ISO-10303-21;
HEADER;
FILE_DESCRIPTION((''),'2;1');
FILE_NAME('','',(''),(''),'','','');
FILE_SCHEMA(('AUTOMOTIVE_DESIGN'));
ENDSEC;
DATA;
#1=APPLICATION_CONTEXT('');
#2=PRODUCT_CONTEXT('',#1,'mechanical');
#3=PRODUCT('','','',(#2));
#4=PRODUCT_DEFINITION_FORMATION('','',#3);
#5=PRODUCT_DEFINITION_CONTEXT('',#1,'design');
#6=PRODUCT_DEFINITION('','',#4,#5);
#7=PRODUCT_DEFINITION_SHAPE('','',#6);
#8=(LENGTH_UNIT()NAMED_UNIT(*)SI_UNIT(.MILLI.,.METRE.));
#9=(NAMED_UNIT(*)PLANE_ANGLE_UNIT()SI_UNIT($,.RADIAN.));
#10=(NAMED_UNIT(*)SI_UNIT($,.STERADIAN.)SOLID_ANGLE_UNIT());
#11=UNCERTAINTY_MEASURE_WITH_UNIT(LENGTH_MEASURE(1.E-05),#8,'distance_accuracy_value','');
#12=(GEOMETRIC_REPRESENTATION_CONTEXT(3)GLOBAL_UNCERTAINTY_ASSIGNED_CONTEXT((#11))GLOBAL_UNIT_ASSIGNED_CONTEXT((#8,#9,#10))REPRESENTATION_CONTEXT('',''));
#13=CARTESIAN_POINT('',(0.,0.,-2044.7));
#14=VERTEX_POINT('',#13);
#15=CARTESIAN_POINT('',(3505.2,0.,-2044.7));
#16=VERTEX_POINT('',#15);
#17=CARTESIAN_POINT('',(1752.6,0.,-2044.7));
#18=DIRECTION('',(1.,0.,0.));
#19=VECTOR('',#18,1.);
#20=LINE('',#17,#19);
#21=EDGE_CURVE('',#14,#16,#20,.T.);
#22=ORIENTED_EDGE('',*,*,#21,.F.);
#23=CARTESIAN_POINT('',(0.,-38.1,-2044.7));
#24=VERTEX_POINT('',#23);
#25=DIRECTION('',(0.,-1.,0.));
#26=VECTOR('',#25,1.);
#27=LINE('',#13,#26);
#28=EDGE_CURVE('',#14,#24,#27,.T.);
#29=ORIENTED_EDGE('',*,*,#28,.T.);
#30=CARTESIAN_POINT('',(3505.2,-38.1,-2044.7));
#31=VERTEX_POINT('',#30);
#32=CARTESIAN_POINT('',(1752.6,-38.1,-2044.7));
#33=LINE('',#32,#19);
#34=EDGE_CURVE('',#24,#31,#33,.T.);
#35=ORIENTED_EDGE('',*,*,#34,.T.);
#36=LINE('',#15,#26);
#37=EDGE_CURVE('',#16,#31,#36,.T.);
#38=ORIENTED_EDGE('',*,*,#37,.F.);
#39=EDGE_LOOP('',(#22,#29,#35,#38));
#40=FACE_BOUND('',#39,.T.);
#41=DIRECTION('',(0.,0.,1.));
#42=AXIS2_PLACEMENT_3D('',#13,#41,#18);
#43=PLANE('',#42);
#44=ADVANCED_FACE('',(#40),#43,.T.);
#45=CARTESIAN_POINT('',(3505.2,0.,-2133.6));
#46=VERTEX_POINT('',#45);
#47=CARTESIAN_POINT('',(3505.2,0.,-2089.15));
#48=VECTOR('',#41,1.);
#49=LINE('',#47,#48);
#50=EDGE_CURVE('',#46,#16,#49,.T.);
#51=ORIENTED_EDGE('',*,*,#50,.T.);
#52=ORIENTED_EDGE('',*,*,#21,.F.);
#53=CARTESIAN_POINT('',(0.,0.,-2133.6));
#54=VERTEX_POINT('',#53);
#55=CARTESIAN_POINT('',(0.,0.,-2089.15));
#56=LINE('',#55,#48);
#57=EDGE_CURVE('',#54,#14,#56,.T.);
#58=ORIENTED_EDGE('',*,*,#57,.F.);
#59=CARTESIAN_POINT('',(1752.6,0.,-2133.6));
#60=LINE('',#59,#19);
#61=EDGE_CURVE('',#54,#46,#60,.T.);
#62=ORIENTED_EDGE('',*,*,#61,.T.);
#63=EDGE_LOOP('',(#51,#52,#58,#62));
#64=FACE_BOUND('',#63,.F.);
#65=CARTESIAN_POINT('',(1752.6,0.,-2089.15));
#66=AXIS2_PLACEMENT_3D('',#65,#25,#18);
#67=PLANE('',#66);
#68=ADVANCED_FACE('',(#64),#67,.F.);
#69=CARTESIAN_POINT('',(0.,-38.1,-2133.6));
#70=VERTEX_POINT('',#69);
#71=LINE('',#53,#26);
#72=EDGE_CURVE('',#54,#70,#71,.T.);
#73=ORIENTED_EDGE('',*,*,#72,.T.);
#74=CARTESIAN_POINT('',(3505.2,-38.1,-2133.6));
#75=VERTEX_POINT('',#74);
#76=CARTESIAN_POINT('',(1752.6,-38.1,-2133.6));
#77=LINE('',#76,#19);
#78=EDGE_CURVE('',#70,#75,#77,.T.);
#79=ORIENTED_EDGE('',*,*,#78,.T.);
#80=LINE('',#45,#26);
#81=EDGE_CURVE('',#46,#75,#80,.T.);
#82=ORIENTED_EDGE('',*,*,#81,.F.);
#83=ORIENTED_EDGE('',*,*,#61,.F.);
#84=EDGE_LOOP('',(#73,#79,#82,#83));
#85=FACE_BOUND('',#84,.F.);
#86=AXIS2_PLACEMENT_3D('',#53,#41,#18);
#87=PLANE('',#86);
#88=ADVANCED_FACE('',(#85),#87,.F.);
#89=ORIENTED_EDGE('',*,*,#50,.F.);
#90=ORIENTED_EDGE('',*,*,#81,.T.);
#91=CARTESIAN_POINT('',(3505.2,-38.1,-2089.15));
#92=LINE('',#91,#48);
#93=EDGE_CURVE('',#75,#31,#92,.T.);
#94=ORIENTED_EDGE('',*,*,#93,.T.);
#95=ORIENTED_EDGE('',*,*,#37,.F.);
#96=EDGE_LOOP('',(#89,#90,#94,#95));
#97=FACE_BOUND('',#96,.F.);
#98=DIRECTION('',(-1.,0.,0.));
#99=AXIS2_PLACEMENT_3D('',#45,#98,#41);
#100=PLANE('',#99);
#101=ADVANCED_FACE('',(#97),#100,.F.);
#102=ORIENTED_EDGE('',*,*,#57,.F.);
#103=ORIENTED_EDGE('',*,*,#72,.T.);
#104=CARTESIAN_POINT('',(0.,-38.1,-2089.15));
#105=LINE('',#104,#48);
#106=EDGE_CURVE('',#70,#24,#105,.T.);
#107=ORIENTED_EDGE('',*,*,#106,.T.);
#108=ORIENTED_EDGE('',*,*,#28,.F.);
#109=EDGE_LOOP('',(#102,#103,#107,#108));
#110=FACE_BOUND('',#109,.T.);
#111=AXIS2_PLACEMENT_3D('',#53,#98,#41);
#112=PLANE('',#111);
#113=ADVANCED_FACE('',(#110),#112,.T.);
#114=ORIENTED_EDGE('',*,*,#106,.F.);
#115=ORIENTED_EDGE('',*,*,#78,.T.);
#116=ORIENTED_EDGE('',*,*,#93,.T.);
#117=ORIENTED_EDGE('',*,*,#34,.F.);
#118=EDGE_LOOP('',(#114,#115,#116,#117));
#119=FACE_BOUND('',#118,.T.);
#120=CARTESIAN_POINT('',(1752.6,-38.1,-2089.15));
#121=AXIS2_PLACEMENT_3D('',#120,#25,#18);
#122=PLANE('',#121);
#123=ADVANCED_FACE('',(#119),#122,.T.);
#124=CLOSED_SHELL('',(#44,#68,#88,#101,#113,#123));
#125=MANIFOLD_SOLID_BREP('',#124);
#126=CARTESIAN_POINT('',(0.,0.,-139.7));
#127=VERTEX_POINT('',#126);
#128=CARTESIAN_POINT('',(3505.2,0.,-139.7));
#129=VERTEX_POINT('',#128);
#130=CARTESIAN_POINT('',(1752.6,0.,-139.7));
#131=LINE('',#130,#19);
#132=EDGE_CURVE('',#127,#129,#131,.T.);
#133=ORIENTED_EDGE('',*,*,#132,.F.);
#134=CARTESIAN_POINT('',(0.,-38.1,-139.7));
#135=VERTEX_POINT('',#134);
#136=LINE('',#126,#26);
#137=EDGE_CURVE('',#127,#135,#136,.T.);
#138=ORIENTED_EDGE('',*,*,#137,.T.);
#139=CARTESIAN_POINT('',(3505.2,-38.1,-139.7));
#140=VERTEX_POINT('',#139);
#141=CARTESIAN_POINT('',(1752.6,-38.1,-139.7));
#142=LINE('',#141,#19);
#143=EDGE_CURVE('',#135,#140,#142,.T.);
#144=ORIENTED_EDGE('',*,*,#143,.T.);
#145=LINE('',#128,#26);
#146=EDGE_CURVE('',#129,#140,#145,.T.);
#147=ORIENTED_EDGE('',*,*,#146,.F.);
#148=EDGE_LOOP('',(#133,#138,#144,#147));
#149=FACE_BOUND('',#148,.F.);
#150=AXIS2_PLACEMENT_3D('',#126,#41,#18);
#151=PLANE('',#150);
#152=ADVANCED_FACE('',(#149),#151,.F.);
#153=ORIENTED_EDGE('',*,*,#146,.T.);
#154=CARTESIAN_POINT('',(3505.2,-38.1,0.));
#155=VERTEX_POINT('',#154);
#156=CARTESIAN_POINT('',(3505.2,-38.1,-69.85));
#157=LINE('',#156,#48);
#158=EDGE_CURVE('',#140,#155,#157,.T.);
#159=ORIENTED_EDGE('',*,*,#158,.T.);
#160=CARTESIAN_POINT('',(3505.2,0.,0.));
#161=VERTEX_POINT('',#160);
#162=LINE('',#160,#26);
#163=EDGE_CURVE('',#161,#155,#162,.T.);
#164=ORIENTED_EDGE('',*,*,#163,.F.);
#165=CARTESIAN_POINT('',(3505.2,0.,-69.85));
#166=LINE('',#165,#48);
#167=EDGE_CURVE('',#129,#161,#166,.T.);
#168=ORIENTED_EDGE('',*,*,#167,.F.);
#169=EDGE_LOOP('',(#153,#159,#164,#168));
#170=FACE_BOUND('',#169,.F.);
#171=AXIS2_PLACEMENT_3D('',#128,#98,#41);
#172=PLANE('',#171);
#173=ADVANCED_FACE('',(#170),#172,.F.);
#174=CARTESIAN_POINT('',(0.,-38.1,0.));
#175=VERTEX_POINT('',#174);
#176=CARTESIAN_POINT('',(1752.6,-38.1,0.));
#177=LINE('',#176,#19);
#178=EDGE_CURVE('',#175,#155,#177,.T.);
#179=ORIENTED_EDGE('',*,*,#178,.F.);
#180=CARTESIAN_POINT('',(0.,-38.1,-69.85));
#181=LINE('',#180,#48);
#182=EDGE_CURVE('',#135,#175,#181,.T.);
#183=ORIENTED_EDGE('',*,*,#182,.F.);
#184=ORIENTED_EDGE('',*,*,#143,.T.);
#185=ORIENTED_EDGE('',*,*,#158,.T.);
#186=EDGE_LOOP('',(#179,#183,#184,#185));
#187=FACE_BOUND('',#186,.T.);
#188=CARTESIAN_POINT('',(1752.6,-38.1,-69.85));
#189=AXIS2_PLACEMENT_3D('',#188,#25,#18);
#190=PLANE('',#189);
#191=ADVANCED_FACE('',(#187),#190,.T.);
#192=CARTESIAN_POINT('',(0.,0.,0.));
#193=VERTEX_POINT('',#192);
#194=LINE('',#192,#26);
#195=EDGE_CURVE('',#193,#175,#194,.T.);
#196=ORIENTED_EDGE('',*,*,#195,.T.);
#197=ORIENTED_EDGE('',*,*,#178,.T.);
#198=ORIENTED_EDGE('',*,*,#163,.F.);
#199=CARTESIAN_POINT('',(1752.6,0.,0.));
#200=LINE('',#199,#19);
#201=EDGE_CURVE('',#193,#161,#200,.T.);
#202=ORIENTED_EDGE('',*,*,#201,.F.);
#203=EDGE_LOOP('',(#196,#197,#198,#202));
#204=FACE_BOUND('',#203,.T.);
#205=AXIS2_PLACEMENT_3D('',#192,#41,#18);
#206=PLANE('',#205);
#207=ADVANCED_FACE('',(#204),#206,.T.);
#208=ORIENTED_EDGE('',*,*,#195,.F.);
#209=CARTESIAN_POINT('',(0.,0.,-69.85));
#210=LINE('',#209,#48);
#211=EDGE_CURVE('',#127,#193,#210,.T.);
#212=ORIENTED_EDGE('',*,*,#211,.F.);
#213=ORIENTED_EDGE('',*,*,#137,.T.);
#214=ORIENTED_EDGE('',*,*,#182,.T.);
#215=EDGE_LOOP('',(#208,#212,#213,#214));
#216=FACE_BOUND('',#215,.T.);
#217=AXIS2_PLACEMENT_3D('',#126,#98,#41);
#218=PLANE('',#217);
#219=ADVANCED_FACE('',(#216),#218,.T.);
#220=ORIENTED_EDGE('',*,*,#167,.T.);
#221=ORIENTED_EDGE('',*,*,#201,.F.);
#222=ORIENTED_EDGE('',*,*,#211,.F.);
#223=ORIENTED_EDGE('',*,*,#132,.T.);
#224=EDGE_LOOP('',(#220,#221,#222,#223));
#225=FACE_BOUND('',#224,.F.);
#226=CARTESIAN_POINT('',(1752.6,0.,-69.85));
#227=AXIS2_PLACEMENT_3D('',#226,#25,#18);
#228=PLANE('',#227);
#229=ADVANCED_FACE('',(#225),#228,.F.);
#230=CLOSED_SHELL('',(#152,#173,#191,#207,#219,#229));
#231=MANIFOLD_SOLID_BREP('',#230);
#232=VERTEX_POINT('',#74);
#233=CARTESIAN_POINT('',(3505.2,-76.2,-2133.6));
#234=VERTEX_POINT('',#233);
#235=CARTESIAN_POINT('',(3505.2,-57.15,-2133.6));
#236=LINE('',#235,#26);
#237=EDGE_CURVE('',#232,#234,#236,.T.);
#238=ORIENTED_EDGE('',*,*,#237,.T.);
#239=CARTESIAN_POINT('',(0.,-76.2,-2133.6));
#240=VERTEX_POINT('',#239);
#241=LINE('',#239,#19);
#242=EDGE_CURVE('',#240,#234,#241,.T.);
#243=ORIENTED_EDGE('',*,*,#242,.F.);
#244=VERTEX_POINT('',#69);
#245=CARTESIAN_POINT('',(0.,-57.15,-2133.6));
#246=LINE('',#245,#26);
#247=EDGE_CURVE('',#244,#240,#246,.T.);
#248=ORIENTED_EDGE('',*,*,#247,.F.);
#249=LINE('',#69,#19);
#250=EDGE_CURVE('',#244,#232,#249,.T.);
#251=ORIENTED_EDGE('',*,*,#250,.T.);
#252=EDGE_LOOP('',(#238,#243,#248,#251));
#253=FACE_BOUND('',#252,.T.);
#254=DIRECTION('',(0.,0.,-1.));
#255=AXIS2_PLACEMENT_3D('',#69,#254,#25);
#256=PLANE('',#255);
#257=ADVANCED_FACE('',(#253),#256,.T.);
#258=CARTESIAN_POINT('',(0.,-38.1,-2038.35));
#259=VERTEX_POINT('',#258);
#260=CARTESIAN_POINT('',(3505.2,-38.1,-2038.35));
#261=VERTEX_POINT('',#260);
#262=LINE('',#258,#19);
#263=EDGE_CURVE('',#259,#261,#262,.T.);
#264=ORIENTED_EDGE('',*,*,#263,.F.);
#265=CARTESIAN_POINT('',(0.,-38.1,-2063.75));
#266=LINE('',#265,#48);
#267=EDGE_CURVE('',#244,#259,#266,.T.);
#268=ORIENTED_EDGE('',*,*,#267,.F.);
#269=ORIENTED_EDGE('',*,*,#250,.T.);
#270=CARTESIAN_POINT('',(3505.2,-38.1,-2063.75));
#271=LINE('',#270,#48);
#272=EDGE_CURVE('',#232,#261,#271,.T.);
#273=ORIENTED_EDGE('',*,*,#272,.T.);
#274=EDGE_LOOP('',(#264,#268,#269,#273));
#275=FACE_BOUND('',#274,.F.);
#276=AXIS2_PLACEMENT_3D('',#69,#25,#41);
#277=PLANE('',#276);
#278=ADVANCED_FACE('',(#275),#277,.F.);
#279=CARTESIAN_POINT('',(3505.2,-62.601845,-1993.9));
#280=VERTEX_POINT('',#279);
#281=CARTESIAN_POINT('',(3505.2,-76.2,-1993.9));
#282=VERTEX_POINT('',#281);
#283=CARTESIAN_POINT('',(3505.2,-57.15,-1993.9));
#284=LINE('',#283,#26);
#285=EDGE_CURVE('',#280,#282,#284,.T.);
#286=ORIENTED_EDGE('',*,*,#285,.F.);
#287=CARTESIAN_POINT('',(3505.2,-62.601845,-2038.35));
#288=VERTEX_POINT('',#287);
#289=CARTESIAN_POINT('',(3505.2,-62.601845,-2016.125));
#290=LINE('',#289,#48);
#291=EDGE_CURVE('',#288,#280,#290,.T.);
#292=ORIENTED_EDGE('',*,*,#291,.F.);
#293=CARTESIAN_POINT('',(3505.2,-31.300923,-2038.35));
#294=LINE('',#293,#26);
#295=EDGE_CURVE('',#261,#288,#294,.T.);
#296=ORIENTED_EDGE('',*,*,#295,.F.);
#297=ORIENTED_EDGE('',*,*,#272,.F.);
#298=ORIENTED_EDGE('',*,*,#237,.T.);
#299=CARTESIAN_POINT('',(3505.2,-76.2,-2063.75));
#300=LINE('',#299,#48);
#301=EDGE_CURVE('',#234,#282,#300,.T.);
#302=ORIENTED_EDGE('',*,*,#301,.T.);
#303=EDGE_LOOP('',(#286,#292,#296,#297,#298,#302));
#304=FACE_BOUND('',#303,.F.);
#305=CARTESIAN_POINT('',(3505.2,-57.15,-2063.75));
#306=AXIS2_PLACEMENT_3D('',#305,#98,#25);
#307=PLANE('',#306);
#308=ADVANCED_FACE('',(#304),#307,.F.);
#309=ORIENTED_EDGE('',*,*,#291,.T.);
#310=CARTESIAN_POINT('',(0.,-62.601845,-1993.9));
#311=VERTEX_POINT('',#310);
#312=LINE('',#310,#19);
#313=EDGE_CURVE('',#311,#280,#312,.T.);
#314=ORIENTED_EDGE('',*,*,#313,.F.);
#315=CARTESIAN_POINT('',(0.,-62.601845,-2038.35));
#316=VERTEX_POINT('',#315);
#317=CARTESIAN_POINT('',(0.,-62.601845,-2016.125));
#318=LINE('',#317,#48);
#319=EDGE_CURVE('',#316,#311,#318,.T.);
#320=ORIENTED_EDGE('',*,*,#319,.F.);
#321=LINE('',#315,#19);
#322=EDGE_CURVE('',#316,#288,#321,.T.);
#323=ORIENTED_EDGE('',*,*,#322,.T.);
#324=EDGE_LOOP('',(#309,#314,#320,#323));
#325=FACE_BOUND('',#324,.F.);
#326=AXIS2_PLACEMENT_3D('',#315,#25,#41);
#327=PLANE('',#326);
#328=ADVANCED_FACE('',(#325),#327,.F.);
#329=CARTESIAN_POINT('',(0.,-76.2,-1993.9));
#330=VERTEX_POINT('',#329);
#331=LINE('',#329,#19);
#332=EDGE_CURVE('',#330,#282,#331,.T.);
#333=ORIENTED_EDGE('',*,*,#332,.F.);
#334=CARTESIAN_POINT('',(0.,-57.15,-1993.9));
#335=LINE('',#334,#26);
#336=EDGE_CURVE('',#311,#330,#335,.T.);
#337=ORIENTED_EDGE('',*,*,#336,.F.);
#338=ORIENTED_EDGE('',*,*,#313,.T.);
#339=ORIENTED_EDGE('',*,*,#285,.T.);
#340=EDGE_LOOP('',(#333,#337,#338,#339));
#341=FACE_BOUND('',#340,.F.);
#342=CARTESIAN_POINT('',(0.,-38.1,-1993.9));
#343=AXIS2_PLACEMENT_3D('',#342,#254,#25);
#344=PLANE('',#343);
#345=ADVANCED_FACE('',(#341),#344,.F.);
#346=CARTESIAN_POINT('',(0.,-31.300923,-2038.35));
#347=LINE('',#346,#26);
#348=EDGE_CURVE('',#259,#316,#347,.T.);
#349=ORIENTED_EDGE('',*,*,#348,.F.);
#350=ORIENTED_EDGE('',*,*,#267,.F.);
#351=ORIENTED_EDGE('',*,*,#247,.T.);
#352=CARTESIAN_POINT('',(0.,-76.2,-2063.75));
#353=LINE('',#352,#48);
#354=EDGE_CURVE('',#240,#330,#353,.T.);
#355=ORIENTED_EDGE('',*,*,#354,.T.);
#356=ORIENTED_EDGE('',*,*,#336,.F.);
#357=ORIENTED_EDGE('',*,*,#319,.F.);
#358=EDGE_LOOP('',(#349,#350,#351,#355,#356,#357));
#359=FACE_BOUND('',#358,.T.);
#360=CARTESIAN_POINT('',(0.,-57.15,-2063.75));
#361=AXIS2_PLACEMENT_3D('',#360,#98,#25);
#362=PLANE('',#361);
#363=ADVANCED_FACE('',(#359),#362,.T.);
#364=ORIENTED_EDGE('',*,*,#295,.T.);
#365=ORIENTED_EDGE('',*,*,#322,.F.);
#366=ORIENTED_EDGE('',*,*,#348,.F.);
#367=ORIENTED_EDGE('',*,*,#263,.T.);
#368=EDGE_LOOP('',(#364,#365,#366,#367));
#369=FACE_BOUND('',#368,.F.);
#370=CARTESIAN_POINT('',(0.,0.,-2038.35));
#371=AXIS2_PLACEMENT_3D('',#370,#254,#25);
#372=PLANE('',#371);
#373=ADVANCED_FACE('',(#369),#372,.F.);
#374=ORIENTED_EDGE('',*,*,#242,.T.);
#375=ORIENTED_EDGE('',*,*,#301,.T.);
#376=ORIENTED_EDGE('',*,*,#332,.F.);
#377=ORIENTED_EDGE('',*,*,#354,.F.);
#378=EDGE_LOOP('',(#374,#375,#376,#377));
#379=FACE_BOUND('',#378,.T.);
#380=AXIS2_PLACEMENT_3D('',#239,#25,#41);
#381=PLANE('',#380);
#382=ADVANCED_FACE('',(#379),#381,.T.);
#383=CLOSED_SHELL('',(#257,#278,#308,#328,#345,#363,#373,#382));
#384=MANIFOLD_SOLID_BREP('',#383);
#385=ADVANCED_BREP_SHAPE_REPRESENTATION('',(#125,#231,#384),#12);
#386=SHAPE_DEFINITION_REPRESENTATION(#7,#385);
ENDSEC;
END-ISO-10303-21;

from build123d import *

# Parameters (mm, degrees)
F0_W     = 3505.2
F0_H     = 139.7
F1_DEPTH = 38.1
F0_H_2   = 88.9
F2_W     = 38.1
F2_H     = 139.7
F3_DEPTH = 3505.2
F4_W     = 62.6018452736
F4_H     = 44.45
F5_DEPTH = 3505.2


# Not quite as in the source:
# - a feature names something its author has since deleted; it is built from what else it names


with BuildPart() as f1:
    # F0 (on Front) → F1 (new body)
    with BuildSketch(Plane.XZ):
        with Locations((1752.6, -69.85)):
            Rectangle(F0_W, F0_H)
    extrude(amount=F1_DEPTH)


with BuildPart() as f1b:
    # F0 (on Front) → F1, piece 2 (new body)
    with BuildSketch(Plane.XZ):
        with Locations((1752.6, -2089.15)):
            Rectangle(F0_W, F0_H_2)
    extrude(amount=F1_DEPTH)


with BuildPart() as f3:
    # F2 (on face) → F3 (new body, through all)
    with BuildSketch(Plane(origin=(0, 0, 0), x_dir=(0, -1, 0), z_dir=(-1, 0, 0))):
        with Locations((57.15, -2063.75)):
            Rectangle(F2_W, F2_H)
    extrude(amount=-F3_DEPTH)

    # F4 (on face) → F5 (cut, through all)
    with BuildSketch(Plane(origin=(0, 0, 0), x_dir=(0, -1, 0), z_dir=(-1, 0, 0))):
        with Locations((31.3009226368, -2016.125)):
            Rectangle(F4_W, F4_H)
    extrude(amount=-F5_DEPTH, mode=Mode.SUBTRACT)


solid = Compound([f1.part, f1b.part, f3.part])
